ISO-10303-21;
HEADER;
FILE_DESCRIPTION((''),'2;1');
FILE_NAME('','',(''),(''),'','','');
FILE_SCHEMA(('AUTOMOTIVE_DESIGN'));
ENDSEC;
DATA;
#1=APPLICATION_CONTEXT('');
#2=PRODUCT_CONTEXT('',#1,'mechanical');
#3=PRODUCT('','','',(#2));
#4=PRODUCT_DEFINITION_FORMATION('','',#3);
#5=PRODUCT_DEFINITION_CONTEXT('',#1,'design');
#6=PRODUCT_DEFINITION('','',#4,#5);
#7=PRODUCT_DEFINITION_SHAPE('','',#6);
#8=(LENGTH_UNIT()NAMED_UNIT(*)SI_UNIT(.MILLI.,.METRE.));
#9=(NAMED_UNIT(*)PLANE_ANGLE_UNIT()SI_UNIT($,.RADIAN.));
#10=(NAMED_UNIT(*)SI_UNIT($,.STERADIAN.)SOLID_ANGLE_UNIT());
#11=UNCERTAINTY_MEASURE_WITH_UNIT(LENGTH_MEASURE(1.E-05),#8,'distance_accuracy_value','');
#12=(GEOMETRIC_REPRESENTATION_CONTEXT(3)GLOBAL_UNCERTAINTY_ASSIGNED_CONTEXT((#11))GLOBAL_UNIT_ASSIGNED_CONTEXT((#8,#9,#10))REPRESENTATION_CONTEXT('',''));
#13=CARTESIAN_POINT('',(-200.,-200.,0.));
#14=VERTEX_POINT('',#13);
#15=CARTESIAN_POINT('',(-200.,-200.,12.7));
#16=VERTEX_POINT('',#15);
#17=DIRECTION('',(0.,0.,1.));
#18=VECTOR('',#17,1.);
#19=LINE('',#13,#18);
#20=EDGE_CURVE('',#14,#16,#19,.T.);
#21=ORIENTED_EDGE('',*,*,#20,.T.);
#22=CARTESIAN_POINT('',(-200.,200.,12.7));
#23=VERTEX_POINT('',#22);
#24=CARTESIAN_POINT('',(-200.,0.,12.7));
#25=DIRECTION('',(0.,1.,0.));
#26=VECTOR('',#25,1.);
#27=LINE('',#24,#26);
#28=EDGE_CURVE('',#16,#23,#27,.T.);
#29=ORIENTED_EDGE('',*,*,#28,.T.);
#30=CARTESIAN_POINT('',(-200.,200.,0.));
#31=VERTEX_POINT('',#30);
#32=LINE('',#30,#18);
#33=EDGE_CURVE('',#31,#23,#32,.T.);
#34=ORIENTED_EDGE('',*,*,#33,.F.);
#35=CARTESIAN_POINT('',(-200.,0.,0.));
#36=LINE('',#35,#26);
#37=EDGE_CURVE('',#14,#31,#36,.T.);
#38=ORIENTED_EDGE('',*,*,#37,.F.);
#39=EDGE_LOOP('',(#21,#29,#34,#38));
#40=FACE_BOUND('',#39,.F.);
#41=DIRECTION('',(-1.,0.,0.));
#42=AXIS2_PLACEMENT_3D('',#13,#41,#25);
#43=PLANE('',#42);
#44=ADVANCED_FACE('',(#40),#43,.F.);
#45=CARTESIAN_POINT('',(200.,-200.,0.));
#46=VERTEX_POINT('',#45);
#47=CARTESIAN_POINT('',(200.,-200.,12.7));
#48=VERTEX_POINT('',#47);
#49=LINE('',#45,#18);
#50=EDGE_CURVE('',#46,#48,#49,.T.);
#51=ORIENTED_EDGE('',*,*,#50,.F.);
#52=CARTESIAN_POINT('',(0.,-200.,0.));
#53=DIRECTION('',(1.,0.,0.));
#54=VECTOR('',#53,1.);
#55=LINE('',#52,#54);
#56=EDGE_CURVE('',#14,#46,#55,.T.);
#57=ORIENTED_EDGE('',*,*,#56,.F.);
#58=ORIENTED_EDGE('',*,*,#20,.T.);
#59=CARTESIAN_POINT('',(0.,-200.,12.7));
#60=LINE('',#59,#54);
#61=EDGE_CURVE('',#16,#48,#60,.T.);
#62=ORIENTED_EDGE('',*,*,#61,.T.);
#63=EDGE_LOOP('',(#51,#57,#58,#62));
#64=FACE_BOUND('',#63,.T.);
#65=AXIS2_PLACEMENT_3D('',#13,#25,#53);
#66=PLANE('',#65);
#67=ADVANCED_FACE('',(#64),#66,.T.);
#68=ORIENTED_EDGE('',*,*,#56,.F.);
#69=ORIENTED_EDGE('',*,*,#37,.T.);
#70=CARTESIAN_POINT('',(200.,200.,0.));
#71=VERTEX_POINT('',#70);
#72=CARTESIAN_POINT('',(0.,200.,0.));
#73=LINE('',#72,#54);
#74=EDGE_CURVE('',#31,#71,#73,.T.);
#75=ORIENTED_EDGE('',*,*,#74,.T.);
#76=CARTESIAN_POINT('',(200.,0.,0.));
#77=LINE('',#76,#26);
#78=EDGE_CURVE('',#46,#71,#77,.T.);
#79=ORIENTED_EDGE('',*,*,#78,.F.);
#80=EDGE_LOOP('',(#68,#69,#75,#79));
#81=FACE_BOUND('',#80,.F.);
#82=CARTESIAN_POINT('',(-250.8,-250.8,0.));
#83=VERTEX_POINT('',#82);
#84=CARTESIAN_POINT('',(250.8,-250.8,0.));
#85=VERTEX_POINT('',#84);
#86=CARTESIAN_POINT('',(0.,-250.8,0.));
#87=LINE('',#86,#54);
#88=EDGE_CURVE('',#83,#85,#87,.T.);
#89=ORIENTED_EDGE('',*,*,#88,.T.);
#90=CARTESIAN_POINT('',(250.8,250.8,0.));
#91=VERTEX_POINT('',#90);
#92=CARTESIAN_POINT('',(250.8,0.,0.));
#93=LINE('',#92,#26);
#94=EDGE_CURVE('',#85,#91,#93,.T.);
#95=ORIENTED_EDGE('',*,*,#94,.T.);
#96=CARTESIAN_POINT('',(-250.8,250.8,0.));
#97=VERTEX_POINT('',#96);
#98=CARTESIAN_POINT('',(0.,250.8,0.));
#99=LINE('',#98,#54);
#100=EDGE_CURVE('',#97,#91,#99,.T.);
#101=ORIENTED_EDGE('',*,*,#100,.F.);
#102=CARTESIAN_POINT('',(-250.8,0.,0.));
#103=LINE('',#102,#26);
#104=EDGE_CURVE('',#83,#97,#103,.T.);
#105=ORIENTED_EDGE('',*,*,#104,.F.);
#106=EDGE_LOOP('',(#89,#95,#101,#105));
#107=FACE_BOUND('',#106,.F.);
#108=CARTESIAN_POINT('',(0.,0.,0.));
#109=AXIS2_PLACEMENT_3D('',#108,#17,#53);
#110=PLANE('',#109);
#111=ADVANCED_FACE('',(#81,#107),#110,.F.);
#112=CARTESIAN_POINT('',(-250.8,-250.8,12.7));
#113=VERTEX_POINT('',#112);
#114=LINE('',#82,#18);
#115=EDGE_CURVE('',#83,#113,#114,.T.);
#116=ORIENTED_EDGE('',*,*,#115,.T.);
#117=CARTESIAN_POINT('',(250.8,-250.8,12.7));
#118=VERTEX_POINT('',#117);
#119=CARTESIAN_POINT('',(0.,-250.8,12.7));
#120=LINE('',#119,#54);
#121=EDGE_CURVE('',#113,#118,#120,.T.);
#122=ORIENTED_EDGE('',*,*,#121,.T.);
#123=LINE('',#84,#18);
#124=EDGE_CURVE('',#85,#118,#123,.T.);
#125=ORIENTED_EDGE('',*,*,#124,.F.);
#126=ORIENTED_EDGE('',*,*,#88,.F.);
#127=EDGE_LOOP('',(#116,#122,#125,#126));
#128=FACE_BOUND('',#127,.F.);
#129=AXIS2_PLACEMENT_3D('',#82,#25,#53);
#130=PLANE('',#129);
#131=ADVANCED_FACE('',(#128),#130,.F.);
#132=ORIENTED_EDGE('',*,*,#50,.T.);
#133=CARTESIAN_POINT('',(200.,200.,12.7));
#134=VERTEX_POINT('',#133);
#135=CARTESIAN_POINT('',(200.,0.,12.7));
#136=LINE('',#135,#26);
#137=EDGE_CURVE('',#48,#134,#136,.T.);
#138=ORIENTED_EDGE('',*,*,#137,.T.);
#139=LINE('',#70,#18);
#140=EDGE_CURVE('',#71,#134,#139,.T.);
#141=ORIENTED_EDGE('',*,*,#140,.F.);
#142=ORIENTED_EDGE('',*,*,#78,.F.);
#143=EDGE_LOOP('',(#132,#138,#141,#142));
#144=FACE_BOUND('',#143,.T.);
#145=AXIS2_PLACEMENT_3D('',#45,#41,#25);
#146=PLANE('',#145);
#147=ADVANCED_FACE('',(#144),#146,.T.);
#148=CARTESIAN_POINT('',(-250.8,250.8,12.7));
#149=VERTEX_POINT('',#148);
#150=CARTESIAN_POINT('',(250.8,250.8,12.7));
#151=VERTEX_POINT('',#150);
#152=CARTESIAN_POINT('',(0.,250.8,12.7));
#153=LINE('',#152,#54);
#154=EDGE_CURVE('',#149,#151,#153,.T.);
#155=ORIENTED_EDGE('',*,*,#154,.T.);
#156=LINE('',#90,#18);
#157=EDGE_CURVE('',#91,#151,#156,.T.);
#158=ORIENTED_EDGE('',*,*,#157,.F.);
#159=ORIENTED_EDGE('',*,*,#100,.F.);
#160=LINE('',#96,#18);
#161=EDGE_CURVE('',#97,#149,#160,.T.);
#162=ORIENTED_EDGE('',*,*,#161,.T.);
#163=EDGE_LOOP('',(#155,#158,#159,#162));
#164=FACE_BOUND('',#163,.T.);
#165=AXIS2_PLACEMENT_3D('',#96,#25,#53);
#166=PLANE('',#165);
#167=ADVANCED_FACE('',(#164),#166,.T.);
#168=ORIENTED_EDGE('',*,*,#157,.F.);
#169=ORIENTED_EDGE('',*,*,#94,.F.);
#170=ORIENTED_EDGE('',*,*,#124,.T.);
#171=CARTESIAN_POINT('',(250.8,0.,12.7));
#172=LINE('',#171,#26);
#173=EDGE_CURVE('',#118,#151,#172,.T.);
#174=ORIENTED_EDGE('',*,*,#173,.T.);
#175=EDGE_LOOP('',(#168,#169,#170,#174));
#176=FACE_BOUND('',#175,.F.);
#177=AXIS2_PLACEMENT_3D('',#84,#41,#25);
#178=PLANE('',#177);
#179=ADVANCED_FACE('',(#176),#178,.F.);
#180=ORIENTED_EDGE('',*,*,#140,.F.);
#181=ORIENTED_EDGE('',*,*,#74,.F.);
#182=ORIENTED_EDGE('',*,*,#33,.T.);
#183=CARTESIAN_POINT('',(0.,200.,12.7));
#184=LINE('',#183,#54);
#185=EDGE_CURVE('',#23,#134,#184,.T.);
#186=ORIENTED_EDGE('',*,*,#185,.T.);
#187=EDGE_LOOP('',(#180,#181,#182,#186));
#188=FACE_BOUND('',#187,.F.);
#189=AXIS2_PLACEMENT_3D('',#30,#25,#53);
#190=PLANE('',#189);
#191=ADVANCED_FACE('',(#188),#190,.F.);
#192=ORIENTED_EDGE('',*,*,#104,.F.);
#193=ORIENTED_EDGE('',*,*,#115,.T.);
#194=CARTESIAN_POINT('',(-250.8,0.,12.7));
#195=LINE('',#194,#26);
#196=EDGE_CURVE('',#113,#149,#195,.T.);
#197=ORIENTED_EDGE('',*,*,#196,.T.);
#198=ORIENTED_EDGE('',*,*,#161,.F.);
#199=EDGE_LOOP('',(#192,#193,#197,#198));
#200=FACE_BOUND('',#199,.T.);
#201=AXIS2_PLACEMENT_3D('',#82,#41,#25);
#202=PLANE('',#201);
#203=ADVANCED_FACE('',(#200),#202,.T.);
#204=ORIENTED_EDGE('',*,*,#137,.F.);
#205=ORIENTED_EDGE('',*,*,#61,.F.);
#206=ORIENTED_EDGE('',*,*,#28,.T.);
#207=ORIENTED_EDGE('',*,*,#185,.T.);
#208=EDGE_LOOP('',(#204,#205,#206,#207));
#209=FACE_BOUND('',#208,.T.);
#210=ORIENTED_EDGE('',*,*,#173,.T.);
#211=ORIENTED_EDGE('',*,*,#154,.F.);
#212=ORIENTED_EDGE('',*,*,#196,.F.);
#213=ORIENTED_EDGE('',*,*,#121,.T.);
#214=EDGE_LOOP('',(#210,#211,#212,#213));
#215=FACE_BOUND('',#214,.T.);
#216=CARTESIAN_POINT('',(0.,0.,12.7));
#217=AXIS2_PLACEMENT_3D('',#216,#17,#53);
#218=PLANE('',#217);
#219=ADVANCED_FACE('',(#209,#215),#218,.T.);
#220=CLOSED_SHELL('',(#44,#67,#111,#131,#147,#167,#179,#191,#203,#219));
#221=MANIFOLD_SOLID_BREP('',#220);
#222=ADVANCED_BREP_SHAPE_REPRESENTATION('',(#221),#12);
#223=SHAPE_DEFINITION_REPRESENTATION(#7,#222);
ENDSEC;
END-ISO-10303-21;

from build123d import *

# Parameters (mm, degrees)
F0_W     = 501.6
F0_H     = 501.6
F0_W_2   = 400
F0_H_2   = 400
F1_DEPTH = 12.7


# Not quite as in the source:
# - a length typed as a fraction of an inch, garbled in the dataset ("3 / 203.2 mm" for 3/8 in), is restored


with BuildPart() as f1:
    # F0 (on Top) → F1 (new body)
    with BuildSketch(Plane.XY):
        Rectangle(F0_W, F0_H)
        Rectangle(F0_W_2, F0_H_2, mode=Mode.SUBTRACT)
    extrude(amount=F1_DEPTH)


solid = f1.part
